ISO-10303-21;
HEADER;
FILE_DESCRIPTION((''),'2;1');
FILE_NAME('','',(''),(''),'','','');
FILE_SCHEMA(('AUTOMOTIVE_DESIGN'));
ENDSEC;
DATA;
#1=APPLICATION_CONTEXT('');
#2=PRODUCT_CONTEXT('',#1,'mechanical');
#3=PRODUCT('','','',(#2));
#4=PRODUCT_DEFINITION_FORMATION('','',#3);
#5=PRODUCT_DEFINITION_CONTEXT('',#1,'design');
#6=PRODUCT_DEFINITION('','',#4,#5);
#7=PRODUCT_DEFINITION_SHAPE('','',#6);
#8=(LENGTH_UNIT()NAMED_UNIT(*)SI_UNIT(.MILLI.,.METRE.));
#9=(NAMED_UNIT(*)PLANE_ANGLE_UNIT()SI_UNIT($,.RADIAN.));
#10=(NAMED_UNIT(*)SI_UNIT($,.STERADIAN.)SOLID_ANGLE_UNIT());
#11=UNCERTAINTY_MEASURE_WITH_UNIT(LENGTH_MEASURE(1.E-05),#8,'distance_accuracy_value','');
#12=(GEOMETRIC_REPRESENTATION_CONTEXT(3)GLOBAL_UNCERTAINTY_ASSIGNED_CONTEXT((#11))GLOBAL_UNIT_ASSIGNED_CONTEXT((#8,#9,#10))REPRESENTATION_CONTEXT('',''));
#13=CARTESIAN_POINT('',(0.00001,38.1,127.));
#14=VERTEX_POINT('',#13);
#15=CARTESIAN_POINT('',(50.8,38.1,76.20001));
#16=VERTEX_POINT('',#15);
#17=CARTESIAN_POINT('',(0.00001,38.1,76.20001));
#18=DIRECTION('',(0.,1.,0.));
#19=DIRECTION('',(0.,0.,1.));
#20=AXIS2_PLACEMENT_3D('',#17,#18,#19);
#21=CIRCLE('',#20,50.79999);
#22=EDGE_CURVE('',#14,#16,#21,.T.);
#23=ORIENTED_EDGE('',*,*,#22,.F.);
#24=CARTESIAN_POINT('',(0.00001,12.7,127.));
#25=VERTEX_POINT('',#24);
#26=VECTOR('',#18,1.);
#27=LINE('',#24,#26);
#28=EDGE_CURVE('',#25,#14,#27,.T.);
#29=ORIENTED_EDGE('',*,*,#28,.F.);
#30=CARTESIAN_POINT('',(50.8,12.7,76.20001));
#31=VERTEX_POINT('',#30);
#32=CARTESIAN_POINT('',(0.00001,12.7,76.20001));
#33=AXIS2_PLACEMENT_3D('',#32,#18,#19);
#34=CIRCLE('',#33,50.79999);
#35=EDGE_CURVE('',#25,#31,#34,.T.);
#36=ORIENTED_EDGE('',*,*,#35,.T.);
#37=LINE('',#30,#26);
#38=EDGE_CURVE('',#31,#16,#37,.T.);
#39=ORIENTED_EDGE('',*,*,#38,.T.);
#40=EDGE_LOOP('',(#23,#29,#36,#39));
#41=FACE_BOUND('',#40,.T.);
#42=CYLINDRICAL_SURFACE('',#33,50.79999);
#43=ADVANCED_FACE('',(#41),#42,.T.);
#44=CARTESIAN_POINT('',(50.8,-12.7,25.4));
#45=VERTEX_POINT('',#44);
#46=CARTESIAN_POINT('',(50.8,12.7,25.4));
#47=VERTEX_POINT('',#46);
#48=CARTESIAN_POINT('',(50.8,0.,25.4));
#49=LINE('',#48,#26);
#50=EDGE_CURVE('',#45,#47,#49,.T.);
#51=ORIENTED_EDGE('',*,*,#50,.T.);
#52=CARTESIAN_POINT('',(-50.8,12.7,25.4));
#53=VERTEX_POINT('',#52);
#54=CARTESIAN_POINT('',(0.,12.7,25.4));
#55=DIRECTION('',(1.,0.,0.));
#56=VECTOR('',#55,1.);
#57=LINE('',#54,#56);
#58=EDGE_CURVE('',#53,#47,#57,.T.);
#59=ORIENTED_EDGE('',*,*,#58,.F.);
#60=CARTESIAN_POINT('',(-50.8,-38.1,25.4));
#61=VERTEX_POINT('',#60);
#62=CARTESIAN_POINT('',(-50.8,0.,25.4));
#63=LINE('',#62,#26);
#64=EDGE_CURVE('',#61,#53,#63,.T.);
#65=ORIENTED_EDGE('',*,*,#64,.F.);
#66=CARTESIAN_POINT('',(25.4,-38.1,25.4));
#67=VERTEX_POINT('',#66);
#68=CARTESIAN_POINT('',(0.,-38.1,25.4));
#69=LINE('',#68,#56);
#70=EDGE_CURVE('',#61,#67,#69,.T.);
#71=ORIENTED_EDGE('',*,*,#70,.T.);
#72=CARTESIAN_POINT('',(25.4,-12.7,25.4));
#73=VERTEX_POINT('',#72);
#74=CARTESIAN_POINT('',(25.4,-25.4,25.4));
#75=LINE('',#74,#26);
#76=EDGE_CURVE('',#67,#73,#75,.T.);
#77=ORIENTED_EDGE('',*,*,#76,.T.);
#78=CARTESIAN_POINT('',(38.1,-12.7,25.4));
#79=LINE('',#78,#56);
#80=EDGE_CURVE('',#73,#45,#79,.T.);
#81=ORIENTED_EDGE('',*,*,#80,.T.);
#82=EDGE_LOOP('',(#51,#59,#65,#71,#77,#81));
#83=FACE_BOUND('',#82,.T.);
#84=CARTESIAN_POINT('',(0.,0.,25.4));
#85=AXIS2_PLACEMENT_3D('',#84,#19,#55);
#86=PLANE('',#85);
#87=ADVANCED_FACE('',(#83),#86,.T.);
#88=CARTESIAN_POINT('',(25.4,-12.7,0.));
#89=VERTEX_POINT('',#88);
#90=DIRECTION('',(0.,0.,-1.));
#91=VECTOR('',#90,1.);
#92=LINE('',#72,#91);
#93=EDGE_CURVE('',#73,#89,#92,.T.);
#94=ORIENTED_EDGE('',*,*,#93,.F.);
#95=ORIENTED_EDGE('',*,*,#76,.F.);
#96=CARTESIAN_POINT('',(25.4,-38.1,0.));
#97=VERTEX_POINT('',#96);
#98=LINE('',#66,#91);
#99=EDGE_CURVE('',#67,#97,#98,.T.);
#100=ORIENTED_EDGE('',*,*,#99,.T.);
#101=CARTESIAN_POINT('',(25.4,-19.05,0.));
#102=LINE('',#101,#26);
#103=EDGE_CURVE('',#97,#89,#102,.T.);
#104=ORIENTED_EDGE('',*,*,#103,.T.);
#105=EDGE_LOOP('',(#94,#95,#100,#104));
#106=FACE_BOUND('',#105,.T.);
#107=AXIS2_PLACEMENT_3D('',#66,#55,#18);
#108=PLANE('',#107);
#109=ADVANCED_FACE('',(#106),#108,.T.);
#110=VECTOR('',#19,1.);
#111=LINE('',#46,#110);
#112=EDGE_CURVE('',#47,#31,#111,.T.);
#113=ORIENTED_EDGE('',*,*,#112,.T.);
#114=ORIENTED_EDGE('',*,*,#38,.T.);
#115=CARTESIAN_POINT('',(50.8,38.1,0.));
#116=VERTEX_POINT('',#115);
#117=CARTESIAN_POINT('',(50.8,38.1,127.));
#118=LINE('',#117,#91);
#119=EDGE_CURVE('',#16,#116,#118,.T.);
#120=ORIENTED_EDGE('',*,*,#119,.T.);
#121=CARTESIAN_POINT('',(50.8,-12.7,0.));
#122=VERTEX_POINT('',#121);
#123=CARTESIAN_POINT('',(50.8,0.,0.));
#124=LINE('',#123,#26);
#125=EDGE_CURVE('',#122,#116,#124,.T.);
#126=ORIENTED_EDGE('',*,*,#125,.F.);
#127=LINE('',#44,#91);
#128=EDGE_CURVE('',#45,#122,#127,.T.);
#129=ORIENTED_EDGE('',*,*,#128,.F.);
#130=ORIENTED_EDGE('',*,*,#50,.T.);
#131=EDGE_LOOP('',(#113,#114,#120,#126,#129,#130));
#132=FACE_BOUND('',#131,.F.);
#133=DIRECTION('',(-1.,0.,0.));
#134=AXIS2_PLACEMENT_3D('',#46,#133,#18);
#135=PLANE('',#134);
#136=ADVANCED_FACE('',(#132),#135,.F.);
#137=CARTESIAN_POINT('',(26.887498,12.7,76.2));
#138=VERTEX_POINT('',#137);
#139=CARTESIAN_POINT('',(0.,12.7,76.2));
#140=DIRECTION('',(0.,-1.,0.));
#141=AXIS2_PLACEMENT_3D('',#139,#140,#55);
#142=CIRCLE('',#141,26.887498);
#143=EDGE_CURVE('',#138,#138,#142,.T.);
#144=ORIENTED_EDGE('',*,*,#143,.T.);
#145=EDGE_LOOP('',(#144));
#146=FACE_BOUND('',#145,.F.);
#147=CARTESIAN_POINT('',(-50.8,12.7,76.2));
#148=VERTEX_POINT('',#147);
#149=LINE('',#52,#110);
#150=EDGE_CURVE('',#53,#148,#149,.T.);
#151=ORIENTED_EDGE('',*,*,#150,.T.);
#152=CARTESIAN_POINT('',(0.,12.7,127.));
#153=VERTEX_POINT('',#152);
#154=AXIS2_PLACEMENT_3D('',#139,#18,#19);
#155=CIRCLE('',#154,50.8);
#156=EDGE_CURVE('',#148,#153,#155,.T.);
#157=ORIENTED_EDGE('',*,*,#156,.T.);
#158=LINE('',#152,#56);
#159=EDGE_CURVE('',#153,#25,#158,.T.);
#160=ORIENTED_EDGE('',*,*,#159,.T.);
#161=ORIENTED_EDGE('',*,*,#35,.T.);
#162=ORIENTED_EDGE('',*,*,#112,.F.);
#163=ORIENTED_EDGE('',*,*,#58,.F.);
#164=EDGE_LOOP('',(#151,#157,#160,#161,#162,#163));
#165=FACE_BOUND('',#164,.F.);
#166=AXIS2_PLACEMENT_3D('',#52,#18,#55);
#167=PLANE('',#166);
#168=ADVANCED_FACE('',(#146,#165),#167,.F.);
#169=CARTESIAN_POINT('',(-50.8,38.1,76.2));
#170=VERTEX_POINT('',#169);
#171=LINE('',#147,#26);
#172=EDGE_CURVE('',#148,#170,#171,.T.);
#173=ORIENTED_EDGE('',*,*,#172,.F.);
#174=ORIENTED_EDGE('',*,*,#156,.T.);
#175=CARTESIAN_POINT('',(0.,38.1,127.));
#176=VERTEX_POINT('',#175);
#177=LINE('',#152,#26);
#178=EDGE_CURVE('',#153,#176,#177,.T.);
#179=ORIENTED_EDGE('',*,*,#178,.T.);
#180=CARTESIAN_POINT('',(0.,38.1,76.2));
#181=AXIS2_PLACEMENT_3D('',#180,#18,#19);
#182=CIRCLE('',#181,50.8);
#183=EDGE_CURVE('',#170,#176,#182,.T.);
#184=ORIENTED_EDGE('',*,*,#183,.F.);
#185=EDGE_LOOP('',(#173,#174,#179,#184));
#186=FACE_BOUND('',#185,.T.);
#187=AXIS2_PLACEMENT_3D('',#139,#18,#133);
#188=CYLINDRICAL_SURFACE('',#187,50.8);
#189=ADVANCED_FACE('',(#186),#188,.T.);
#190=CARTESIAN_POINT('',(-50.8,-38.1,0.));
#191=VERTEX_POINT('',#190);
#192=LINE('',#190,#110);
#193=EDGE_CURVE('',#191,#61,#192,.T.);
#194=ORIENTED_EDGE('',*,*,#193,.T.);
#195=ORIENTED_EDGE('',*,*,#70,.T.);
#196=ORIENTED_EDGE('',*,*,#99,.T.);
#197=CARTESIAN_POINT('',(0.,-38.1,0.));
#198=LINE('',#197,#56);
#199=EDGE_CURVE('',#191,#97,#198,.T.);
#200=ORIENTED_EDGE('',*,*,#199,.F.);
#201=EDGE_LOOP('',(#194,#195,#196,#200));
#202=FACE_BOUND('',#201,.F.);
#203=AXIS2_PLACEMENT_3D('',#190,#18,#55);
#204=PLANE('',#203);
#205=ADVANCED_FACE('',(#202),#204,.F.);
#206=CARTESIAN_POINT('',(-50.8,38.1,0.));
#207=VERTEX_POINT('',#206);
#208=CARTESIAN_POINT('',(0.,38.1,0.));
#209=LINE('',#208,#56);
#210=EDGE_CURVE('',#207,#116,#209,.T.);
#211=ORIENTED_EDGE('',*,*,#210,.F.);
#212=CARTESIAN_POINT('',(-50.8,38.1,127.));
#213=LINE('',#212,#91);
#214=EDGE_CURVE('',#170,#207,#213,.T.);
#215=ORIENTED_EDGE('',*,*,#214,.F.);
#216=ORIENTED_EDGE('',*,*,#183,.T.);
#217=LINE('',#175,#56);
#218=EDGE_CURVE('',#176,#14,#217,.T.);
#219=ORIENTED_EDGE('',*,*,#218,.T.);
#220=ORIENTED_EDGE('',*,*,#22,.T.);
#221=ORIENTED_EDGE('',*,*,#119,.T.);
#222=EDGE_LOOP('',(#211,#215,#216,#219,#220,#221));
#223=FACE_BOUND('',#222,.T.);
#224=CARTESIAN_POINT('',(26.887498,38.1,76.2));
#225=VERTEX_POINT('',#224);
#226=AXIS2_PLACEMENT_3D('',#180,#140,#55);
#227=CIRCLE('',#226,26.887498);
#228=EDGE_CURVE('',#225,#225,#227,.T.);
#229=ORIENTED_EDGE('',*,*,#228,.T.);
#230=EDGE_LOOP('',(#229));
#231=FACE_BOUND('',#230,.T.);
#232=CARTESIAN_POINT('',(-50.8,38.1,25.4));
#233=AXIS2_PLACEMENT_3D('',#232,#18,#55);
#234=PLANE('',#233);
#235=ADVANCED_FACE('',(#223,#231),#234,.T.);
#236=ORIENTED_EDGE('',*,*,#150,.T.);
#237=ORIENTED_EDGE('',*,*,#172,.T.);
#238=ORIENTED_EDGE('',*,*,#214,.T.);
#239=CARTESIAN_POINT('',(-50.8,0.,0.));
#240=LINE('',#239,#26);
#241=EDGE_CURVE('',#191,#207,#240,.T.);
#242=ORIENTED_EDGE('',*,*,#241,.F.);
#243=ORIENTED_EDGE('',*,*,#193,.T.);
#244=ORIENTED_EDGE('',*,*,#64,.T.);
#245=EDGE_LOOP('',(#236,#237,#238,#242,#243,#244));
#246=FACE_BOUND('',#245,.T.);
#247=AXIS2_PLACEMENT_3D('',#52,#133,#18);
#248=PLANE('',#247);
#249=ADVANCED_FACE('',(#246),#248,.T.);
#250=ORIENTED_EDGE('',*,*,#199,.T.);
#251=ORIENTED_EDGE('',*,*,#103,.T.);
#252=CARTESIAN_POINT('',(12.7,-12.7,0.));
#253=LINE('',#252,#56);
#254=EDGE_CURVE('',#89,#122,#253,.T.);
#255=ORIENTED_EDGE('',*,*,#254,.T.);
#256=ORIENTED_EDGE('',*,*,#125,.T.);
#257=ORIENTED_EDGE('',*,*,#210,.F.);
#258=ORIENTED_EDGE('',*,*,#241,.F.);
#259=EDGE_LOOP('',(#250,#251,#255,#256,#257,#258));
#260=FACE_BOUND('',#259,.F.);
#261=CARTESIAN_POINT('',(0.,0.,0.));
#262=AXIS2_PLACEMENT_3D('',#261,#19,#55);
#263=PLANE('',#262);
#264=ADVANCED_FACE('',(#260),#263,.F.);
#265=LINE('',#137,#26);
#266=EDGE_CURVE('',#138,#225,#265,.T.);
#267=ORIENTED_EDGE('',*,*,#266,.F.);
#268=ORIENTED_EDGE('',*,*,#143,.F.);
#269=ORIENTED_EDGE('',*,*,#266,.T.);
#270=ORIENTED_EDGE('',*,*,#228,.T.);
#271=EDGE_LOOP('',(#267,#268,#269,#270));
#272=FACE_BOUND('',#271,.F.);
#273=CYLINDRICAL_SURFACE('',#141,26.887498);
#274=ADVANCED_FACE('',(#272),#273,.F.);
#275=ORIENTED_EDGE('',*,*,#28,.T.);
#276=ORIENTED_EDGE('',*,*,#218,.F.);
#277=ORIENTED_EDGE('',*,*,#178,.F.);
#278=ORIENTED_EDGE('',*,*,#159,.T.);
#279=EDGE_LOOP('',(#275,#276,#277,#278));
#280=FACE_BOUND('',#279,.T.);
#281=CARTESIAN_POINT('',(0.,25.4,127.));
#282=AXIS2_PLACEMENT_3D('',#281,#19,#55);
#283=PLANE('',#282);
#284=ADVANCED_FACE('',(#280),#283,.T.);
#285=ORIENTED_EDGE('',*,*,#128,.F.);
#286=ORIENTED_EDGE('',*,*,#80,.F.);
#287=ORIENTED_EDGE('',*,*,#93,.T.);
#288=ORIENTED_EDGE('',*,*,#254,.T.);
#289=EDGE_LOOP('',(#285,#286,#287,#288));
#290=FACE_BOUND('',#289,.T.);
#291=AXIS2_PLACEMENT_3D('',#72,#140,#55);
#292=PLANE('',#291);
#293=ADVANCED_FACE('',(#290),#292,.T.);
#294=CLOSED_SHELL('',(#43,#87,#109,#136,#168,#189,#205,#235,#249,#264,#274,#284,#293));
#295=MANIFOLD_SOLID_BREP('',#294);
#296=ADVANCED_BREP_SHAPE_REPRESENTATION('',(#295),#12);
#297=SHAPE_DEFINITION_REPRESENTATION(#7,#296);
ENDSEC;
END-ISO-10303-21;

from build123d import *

# Parameters (mm, degrees)
F0_W     = 101.6
F0_H     = 76.2
F1_DEPTH = 25.4
F2_W     = 25.4
F2_H     = 25.4
F3_DEPTH = 25.401
F4_W     = 101.6
F4_H     = 25.4
F5_DEPTH = 101.6
F6_R     = 50.8
F7_R     = 50.79999
F8_R     = 26.8874983084
F9_DEPTH = 25.401


# Not quite as in the source:
# - a fillet or chamfer is up to 0.001 mm smaller than in the source, because OpenCascade refuses the exact size


with BuildPart() as f1:
    # F0 (on Top) → F1 (new body)
    with BuildSketch(Plane.XY):
        Rectangle(F0_W, F0_H)
    extrude(amount=F1_DEPTH)

    # F2 (on face) → F3 (cut, through all)
    with BuildSketch(Plane.XY.offset(25.4)):
        with Locations((38.1, -25.4)):
            Rectangle(F2_W, F2_H)
    extrude(amount=-F3_DEPTH, mode=Mode.SUBTRACT)

    # F4 (on face) → F5 (join)
    with BuildSketch(Plane.XY.offset(25.4)):
        with Locations((0, 25.4)):
            Rectangle(F4_W, F4_H)
    extrude(amount=F5_DEPTH)

    # F6
    f6_edges = [f1.edges().sort_by_distance(p)[0] for p in [
        (-50.8, 25.4, 127),
    ]]
    fillet(f6_edges, radius=F6_R)

    # F7 (radius 50.8 in the source; OpenCascade refuses exactly that, so slightly less here)
    f7_edges = [f1.edges().sort_by_distance(p)[0] for p in [
        (50.8, 25.4, 127),
    ]]
    fillet(f7_edges, radius=F7_R)

    # F8 (on face) → F9 (cut, through all)
    with BuildSketch(Plane.XZ.offset(-12.7)):
        with Locations((0, 76.2)):
            Circle(F8_R)
    extrude(amount=-F9_DEPTH, mode=Mode.SUBTRACT)


solid = f1.part
